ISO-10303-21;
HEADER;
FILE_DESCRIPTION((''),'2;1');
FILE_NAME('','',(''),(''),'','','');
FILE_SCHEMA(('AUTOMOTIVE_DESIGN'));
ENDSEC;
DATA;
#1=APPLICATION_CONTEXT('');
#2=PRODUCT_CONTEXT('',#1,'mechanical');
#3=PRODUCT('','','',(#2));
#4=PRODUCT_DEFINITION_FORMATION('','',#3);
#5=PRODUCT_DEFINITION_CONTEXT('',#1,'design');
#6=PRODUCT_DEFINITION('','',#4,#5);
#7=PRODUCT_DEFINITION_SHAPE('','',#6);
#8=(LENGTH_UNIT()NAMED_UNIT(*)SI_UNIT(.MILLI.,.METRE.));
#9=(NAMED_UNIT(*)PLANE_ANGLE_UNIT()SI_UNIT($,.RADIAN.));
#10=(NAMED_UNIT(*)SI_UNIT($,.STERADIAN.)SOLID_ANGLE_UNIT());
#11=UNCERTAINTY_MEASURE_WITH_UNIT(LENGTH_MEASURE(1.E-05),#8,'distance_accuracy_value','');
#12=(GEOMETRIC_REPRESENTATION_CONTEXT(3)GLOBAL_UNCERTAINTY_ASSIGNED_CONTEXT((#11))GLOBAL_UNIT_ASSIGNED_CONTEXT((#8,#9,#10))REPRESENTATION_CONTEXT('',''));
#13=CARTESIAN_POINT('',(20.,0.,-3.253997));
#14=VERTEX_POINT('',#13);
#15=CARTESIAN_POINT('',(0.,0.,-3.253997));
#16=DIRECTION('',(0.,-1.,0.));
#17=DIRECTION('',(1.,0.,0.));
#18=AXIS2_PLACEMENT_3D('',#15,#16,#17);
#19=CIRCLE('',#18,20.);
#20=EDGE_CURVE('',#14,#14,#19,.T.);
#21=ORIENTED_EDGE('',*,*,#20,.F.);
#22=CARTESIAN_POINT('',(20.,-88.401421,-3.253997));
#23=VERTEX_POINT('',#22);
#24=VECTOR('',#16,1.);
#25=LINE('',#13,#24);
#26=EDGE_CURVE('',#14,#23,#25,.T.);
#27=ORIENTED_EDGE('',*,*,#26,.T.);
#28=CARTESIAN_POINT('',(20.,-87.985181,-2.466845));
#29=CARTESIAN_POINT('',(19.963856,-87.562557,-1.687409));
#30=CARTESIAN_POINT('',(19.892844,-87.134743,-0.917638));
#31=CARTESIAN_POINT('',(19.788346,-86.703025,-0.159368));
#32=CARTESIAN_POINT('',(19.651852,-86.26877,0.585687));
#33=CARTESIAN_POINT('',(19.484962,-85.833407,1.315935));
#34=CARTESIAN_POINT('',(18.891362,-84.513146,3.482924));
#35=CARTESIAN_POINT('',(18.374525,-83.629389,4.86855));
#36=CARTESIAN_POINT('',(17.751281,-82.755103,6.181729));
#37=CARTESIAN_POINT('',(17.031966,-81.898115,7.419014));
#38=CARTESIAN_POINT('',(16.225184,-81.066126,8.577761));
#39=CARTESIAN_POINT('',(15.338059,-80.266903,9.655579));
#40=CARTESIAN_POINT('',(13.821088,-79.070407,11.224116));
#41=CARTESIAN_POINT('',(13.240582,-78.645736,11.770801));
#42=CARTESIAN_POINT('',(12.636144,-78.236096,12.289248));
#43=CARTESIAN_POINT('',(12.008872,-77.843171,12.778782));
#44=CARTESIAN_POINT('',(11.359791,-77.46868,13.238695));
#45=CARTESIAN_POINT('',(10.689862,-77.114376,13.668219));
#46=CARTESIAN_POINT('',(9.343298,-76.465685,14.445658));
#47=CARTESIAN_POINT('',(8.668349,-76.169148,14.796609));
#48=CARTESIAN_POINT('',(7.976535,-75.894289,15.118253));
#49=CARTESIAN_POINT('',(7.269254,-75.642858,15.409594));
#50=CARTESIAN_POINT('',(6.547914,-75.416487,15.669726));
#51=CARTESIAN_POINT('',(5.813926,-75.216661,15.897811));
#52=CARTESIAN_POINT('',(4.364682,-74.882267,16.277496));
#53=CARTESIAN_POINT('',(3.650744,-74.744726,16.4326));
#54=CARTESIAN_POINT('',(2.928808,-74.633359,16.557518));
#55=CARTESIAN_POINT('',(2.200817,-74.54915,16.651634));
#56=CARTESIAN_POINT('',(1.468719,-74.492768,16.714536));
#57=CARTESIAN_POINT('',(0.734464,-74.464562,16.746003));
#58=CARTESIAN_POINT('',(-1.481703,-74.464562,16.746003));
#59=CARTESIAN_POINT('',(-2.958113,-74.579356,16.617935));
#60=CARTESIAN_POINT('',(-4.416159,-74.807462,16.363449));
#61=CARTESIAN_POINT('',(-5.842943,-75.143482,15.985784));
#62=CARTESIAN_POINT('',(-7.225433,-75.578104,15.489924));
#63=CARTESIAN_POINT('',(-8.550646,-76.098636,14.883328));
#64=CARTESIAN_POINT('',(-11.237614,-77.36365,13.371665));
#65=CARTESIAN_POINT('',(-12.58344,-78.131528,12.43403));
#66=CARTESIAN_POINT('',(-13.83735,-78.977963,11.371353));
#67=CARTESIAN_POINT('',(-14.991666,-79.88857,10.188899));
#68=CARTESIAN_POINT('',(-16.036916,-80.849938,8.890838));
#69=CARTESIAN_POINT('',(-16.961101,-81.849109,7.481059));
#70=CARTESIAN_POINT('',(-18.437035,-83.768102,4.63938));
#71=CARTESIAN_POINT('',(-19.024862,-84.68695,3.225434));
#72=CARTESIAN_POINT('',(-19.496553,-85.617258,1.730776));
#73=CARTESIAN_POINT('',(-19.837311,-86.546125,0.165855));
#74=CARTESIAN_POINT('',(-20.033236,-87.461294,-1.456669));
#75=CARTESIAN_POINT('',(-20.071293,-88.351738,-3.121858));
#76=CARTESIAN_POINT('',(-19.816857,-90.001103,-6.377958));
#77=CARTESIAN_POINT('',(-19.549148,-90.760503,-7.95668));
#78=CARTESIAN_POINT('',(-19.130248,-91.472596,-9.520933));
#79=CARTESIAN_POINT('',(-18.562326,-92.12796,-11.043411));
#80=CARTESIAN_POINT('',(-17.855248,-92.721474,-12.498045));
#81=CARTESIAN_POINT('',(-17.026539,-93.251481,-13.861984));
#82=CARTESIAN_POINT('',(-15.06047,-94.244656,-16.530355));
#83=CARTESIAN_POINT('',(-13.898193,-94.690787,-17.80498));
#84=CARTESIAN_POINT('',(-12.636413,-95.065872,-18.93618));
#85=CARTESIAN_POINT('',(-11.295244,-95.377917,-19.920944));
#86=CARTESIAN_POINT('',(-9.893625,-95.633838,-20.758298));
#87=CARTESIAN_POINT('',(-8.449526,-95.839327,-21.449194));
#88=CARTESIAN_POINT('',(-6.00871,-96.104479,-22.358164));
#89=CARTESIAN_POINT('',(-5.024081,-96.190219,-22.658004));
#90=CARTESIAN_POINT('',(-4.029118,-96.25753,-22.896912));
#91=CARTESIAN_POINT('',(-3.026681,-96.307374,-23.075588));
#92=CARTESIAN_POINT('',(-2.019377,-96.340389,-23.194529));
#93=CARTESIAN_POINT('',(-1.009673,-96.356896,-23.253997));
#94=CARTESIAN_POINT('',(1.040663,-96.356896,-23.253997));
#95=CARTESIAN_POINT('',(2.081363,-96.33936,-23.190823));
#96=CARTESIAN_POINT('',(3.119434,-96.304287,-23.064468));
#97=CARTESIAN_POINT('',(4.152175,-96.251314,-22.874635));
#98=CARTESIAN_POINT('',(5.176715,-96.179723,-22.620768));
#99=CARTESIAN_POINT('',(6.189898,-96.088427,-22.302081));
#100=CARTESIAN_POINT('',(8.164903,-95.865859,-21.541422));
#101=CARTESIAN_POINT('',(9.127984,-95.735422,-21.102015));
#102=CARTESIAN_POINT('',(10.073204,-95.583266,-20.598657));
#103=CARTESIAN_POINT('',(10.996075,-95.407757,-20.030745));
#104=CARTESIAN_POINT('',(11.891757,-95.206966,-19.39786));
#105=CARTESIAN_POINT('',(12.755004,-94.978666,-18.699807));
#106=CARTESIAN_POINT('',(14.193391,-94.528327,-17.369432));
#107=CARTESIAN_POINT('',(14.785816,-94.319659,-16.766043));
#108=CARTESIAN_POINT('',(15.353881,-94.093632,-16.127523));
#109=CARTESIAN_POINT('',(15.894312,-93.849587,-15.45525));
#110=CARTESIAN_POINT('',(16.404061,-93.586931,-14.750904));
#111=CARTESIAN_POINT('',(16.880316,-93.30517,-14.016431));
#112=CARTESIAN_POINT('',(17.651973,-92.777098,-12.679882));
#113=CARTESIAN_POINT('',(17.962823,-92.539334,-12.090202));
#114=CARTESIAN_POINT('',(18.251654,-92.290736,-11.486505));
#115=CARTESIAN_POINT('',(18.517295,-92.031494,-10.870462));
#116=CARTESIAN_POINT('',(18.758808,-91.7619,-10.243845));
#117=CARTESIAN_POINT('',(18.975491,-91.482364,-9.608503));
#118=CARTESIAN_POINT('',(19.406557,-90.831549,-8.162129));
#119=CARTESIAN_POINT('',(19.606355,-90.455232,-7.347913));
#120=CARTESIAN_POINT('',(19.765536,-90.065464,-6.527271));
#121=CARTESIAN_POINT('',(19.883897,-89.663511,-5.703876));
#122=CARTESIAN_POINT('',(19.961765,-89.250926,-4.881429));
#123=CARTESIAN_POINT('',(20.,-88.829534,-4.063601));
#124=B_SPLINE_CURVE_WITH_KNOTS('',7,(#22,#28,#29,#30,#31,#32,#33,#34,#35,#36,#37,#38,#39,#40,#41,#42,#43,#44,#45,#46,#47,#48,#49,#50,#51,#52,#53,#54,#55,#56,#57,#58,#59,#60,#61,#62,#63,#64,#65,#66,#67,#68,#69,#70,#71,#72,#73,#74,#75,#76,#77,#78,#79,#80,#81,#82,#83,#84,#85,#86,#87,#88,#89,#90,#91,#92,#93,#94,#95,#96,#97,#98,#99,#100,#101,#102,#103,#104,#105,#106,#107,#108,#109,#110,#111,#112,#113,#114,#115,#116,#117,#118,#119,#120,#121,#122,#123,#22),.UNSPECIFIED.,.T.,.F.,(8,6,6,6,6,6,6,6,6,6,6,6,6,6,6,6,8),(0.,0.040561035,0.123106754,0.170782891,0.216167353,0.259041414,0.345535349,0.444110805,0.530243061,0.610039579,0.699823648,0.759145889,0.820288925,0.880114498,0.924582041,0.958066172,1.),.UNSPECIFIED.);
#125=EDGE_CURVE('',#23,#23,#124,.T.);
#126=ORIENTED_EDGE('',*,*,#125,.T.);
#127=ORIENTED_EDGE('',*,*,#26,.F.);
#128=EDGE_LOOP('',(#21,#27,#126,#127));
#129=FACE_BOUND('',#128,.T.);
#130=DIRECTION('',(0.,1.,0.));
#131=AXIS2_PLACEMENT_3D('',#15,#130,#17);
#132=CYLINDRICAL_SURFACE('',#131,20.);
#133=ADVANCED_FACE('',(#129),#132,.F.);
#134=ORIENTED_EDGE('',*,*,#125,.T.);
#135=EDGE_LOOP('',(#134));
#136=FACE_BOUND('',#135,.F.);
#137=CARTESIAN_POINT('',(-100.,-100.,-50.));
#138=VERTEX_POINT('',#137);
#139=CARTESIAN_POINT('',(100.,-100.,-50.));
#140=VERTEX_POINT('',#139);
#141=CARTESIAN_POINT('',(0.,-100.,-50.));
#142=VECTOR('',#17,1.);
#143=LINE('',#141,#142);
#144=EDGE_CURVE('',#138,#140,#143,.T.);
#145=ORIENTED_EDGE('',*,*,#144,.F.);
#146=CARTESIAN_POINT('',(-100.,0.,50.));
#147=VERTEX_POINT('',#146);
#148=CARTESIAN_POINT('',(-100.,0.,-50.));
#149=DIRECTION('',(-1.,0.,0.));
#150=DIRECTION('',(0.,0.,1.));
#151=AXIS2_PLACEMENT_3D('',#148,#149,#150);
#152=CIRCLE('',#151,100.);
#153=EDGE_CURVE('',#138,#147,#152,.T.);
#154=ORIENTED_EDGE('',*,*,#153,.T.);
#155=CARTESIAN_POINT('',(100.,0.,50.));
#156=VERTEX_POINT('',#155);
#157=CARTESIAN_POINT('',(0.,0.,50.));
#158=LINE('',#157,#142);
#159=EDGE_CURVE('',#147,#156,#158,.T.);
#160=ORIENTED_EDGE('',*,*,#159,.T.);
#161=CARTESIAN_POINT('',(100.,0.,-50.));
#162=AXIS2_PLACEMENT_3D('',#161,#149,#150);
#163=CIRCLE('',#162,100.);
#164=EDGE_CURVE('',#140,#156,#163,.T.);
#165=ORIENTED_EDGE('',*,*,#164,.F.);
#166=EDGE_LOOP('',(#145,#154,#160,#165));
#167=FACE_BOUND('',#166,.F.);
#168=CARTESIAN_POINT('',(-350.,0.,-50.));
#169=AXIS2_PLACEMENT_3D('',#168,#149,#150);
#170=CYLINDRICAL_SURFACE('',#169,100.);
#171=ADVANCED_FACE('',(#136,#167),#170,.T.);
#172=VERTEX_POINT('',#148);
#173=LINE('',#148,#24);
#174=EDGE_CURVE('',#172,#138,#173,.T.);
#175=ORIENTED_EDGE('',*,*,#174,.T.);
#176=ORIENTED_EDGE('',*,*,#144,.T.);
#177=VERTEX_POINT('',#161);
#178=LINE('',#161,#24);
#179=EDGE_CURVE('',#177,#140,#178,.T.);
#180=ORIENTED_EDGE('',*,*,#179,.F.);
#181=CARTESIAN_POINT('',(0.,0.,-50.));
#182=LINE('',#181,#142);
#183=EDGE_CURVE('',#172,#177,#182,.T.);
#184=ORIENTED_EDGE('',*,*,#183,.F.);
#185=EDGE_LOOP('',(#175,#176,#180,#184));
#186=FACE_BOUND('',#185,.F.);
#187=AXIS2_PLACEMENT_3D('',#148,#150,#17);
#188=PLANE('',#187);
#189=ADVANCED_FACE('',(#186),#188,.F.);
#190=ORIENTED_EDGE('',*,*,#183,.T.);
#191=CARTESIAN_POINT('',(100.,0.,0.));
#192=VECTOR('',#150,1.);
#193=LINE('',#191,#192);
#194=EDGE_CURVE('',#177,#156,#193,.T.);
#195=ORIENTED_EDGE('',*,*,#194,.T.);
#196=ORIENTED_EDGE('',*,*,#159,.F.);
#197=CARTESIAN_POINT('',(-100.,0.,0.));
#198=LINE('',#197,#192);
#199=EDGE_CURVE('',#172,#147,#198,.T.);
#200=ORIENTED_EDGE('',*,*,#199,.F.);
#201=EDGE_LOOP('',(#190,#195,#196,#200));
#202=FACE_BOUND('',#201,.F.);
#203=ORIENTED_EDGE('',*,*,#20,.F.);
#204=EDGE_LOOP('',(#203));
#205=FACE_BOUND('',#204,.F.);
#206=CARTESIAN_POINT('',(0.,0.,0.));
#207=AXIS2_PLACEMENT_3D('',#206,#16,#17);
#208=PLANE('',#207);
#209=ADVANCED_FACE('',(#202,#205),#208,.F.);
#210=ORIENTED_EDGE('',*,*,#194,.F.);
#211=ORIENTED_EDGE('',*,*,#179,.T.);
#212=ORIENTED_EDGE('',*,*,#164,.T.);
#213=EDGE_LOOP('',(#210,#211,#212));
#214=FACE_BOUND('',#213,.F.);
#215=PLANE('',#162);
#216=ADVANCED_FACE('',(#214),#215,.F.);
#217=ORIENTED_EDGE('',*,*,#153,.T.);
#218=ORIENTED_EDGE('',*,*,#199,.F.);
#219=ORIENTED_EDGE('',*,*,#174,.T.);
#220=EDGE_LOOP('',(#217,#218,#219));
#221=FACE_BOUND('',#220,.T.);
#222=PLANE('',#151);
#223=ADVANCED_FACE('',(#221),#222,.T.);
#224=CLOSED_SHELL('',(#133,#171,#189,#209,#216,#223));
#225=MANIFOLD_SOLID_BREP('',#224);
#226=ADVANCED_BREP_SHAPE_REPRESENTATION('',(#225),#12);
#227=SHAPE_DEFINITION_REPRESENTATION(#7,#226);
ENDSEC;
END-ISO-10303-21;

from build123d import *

# Parameters (mm, degrees)
F0_W        = 200
F0_H        = 100
F0_R        = 20
F1_DEPTH    = 100
F2_T1_DEPTH = 700


# Not quite as in the source:
# - a fillet or chamfer that OpenCascade refuses, or shapes differently, is made with other operations: its cross-section is extruded or revolved along the edge and cut away or added


with BuildPart() as f1:
    # F0 (on Front) → F1 (new body)
    with BuildSketch(Plane.XZ):
        Rectangle(F0_W, F0_H)
        with Locations((0, -3.2539968379)):
            Circle(F0_R, mode=Mode.SUBTRACT)
    extrude(amount=F1_DEPTH)

    # F2: fillet of radius 100 on 1 edges, made by hand

    # F2_s2 → F2_t1 (cut)
    with BuildSketch(Plane.YZ.offset(-350)):
        with BuildLine():
            ThreePointArc((0, 50), (-70.7106781187, 20.7106781187), (-100, -50))
            Line((-100, -50), (-100, 50))
            Line((-100, 50), (0, 50))
        make_face()
    extrude(amount=F2_T1_DEPTH, mode=Mode.SUBTRACT)


solid = f1.part
